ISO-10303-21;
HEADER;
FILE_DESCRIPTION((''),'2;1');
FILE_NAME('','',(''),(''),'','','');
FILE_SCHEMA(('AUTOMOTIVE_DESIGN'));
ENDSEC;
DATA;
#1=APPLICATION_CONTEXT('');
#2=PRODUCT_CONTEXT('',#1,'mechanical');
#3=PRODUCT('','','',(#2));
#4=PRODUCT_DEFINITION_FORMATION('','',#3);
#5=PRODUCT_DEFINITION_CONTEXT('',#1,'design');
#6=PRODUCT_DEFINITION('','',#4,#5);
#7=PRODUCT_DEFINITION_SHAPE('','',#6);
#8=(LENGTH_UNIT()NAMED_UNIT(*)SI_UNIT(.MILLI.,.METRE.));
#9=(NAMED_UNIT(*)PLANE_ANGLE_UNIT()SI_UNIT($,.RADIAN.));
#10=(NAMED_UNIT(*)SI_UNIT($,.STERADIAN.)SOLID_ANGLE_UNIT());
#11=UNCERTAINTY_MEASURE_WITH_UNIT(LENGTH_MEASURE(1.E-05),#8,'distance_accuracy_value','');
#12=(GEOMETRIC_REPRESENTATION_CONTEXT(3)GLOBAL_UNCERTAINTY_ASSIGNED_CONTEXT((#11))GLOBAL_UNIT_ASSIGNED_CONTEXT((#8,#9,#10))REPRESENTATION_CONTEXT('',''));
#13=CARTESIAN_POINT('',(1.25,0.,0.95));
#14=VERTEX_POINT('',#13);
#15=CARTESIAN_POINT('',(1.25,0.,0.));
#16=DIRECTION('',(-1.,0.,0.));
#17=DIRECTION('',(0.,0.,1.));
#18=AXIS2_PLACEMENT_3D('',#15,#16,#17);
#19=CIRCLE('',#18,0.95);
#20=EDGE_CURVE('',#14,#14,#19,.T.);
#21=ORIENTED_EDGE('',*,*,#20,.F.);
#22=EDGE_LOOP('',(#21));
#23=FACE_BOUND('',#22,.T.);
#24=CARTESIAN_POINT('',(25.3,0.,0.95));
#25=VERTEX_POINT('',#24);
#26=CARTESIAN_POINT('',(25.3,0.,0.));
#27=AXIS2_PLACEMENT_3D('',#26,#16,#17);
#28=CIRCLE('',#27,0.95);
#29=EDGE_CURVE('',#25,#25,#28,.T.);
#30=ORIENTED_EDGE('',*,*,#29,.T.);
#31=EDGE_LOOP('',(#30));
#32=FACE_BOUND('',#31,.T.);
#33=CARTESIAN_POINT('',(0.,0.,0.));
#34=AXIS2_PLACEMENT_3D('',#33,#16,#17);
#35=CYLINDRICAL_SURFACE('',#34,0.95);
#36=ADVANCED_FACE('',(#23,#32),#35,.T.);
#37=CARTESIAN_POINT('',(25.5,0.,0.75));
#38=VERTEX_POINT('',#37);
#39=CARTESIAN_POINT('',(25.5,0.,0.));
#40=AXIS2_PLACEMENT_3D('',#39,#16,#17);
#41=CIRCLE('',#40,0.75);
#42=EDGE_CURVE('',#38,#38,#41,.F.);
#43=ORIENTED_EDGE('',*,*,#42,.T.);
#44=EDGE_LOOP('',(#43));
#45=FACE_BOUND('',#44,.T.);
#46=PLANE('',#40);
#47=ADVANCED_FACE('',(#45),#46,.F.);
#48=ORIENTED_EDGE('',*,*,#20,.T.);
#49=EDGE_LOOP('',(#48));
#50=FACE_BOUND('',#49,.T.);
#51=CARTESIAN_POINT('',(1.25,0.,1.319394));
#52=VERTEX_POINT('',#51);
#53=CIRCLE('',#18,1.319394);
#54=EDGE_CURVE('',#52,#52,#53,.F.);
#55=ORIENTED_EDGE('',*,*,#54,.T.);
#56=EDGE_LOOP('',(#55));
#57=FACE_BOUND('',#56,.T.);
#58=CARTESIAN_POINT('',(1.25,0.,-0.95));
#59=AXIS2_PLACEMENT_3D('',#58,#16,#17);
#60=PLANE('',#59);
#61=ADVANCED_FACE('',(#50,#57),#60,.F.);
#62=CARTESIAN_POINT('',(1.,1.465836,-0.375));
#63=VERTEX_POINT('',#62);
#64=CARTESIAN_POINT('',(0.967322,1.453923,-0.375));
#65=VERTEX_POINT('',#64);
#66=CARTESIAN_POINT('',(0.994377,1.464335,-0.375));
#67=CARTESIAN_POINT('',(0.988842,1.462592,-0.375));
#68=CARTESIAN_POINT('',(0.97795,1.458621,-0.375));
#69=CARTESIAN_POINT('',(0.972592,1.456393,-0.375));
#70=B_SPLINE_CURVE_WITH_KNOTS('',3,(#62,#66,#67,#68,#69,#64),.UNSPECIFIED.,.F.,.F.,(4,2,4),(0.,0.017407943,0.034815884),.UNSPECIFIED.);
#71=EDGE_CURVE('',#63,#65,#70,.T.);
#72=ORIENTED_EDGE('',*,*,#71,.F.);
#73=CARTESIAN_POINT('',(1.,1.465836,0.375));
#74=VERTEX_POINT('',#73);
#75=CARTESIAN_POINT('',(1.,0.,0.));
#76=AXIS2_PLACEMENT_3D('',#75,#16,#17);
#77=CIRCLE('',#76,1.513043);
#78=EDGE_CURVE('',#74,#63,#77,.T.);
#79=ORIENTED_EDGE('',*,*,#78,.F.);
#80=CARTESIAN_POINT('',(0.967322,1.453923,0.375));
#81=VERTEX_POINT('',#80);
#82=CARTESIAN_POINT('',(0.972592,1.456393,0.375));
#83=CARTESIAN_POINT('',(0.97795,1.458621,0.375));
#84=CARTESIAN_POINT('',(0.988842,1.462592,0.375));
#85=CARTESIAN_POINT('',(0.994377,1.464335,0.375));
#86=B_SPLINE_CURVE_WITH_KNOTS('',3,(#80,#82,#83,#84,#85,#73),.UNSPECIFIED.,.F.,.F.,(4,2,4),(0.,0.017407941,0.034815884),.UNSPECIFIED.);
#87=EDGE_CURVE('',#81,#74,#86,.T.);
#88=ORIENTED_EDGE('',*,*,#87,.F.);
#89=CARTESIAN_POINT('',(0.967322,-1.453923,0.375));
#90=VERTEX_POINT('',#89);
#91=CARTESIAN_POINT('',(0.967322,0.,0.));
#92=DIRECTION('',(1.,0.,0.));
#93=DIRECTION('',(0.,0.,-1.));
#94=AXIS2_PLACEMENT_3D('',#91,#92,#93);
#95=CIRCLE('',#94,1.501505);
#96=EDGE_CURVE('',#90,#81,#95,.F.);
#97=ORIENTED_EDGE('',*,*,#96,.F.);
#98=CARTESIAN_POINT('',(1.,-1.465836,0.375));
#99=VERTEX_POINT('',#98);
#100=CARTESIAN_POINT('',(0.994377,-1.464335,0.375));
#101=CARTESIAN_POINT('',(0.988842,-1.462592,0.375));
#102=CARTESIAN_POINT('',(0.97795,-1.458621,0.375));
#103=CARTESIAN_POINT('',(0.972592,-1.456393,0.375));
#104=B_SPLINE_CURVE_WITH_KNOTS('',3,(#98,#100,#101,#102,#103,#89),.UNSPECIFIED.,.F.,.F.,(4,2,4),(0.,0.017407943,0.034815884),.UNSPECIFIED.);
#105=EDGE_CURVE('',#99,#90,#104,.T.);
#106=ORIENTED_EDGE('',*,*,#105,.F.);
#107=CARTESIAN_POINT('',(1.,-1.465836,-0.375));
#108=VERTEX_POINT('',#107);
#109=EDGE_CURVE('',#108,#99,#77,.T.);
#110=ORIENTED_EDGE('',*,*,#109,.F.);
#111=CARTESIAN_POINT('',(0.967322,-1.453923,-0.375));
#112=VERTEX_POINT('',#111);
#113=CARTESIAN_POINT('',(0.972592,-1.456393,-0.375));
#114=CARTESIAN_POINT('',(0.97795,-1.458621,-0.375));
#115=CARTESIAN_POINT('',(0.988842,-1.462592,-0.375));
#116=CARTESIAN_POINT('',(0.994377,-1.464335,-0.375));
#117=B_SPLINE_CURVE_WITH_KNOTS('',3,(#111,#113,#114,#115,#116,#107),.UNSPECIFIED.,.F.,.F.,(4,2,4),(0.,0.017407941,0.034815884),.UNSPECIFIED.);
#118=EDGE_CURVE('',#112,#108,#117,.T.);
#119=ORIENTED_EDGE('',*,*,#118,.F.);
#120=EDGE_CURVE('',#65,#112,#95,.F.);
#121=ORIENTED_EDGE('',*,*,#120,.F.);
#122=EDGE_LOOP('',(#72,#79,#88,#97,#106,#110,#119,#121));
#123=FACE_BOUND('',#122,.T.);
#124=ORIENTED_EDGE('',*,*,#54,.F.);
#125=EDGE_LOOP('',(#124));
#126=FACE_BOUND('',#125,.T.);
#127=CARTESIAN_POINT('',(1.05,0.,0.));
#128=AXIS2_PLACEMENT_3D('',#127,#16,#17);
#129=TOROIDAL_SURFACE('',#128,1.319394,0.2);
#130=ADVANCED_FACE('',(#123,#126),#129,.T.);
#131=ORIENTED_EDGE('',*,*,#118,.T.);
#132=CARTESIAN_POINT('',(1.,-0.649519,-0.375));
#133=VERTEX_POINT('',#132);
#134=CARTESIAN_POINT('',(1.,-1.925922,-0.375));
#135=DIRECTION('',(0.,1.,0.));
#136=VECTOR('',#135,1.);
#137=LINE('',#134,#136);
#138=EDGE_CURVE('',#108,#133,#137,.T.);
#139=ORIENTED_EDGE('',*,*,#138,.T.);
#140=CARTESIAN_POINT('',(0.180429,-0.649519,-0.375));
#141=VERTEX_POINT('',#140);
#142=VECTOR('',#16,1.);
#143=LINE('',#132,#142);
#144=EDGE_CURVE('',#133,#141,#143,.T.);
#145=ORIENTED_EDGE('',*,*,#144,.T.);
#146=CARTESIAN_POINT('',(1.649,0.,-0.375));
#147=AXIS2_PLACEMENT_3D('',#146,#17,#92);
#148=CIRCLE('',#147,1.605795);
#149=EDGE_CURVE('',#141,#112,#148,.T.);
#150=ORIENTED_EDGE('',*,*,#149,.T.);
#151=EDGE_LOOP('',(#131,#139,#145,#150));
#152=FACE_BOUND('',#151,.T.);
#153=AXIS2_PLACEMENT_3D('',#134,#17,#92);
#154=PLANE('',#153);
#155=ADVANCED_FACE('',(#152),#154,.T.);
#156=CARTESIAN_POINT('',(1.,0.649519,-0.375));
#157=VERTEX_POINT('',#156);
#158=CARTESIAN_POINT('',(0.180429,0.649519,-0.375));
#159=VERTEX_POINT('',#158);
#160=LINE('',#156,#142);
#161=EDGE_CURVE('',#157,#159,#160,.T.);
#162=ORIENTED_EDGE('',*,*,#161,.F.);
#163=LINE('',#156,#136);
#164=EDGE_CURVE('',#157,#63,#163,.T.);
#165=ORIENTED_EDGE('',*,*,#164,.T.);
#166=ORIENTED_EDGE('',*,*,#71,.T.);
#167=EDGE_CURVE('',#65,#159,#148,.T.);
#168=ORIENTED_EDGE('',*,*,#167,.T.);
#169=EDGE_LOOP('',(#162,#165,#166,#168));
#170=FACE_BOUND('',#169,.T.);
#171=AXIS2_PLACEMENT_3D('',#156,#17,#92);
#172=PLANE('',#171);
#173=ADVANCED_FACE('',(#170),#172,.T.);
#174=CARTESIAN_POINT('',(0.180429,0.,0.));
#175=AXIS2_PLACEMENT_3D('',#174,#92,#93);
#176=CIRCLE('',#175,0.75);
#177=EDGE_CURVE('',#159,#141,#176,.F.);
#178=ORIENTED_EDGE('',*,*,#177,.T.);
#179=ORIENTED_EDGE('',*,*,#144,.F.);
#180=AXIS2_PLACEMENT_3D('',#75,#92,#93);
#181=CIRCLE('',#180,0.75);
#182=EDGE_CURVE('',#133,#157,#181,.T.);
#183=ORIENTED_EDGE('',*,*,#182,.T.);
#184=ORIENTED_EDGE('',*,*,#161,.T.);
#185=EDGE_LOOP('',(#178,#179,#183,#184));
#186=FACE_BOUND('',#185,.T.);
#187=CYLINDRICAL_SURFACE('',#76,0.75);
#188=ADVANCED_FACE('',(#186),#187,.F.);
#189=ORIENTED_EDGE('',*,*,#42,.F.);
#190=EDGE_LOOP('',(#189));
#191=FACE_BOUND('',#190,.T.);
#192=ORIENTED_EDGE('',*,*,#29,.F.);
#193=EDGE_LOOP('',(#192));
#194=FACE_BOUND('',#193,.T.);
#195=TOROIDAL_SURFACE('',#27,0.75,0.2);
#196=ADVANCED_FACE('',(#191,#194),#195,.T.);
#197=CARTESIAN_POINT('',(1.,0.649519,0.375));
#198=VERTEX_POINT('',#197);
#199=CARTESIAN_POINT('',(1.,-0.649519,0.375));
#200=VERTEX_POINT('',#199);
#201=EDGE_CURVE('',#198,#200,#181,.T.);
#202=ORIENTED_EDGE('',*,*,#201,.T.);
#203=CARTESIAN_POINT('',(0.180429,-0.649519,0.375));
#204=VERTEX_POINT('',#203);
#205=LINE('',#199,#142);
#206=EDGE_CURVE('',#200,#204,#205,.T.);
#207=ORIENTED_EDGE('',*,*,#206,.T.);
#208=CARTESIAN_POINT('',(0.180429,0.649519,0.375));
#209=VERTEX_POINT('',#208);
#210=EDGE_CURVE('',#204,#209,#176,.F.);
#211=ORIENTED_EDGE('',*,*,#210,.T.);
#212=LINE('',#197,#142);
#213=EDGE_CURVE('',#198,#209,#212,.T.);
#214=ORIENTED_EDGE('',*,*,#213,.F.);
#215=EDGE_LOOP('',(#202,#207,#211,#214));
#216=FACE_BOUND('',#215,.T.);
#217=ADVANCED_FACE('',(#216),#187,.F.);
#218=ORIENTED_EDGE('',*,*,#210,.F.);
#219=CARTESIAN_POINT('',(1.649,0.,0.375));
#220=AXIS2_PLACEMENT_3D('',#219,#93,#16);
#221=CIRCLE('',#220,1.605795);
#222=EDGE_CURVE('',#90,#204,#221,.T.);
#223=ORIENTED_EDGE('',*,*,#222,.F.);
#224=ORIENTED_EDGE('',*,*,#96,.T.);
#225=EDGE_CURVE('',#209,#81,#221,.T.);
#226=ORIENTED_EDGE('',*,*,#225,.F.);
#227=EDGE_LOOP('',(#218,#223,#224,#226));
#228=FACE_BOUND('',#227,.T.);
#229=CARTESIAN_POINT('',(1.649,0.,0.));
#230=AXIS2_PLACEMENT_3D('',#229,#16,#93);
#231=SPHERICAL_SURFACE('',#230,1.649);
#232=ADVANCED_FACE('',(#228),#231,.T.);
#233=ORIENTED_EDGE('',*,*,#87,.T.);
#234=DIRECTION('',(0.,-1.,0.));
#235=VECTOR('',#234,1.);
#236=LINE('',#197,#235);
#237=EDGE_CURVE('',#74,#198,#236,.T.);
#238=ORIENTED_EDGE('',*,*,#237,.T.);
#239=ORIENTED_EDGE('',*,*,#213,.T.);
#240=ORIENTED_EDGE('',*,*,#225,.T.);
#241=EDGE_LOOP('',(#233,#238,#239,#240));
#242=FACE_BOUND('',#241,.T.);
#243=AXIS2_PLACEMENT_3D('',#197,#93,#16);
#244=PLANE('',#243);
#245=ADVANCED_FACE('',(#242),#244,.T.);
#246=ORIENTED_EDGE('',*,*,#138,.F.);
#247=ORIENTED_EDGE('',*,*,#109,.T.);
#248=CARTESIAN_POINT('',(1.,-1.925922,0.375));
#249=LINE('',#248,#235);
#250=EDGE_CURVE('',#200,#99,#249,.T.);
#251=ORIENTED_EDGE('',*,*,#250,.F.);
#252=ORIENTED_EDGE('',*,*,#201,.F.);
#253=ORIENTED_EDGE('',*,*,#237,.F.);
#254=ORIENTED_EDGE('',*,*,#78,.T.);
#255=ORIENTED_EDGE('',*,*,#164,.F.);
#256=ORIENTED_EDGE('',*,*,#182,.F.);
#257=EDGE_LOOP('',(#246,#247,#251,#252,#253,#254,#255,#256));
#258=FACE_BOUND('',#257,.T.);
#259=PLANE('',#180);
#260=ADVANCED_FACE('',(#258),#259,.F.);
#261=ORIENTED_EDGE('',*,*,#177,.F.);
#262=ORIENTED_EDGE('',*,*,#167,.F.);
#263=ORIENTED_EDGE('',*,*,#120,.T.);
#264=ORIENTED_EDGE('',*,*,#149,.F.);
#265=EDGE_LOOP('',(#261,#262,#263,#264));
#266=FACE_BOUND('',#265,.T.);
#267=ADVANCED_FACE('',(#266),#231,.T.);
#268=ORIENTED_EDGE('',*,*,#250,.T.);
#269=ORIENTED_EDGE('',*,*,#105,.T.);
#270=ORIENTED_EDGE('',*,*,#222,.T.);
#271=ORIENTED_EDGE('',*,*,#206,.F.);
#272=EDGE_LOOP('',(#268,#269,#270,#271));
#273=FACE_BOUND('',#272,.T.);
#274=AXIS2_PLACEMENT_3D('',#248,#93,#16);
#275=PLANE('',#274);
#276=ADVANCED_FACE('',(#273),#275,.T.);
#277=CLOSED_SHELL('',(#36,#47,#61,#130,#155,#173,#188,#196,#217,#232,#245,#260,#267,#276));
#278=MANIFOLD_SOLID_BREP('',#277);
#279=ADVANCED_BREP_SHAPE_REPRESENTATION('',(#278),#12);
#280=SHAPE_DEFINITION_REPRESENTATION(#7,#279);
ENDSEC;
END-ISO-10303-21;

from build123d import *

# Parameters (mm, degrees)
CUT_EXTRUDE1_DEPTH = 1
FILLET1_R          = 0.2


with BuildPart() as part:
    # Sketch1 → Revolve1 (revolve)
    with BuildSketch(Plane(origin=(0, 0, 0), x_dir=(1, 0, 0), z_dir=(0, 1, 0))):
        with BuildLine():
            Line((0, 0), (25.5, 0))
            Line((25.5, 0), (25.5, 0.95))
            Line((25.5, 0.95), (1.25, 0.95))
            Line((1.25, 0.95), (1.25, 1.6))
            ThreePointArc((1.25, 1.6), (0.349547808, 1.015197025), (0, 0))
        make_face()
    revolve(axis=Axis((0, 0, 0), (1, 0, 0)))

    # Sketch2 → Cut-Extrude1 (cut)
    with BuildSketch(Plane(origin=(0, 0, 0), x_dir=(0, 0, -1), z_dir=(1, 0, 0))):
        with BuildLine():
            Line((0.375, -1.925921717), (-0.375, -1.925921717))
            Line((-0.375, -1.925921717), (-0.375, -0.649519053))
            ThreePointArc((-0.375, -0.649519053), (-0.75, 0), (-0.375, 0.649519053))
            Line((-0.375, 0.649519053), (-0.375, 1.925921717))
            Line((-0.375, 1.925921717), (0.375, 1.925921717))
            Line((0.375, 1.925921717), (0.375, 0.649519053))
            ThreePointArc((0.375, 0.649519053), (0.75, 0), (0.375, -0.649519053))
            Line((0.375, -0.649519053), (0.375, -1.925921717))
        make_face()
    extrude(amount=CUT_EXTRUDE1_DEPTH, mode=Mode.SUBTRACT)

    # Fillet1
    # the kernel refuses this fillet: 0.2 mm, written as the material it takes off along each edge
    with BuildSketch(Plane(origin=(25.5, 0, 0), x_dir=(0, 0, -1), z_dir=(0, -1, 0))) as fillet1_piece_1:
        with BuildLine():
            CenterArc((0.95 - FILLET1_R, -FILLET1_R), FILLET1_R, 0, 90)
            Line((0.95, -FILLET1_R), (0.95, 0))
            Line((0.95, 0), (0.95 - FILLET1_R, 0))
        make_face()
    revolve(axis=Axis((25.5, 0, 0), (1, 0, 0)), mode=Mode.SUBTRACT)
    with BuildSketch(Plane(origin=(1.25, 0, 0), x_dir=(0, 0, -1), z_dir=(0, -1, 0))) as fillet1_piece_2:
        with BuildLine():
            CenterArc((1.3193938, -0.2), FILLET1_R, 335.582123666, 114.417876334)
            ThreePointArc((1.501504746, -0.282677709), (1.557180013, -0.143578479), (1.6, 0))
            Line((1.6, 0), (1.3193938, 0))
        make_face()
    revolve(axis=Axis((1.25, 0, 0), (1, 0, 0)), mode=Mode.SUBTRACT)


solid = part.part
